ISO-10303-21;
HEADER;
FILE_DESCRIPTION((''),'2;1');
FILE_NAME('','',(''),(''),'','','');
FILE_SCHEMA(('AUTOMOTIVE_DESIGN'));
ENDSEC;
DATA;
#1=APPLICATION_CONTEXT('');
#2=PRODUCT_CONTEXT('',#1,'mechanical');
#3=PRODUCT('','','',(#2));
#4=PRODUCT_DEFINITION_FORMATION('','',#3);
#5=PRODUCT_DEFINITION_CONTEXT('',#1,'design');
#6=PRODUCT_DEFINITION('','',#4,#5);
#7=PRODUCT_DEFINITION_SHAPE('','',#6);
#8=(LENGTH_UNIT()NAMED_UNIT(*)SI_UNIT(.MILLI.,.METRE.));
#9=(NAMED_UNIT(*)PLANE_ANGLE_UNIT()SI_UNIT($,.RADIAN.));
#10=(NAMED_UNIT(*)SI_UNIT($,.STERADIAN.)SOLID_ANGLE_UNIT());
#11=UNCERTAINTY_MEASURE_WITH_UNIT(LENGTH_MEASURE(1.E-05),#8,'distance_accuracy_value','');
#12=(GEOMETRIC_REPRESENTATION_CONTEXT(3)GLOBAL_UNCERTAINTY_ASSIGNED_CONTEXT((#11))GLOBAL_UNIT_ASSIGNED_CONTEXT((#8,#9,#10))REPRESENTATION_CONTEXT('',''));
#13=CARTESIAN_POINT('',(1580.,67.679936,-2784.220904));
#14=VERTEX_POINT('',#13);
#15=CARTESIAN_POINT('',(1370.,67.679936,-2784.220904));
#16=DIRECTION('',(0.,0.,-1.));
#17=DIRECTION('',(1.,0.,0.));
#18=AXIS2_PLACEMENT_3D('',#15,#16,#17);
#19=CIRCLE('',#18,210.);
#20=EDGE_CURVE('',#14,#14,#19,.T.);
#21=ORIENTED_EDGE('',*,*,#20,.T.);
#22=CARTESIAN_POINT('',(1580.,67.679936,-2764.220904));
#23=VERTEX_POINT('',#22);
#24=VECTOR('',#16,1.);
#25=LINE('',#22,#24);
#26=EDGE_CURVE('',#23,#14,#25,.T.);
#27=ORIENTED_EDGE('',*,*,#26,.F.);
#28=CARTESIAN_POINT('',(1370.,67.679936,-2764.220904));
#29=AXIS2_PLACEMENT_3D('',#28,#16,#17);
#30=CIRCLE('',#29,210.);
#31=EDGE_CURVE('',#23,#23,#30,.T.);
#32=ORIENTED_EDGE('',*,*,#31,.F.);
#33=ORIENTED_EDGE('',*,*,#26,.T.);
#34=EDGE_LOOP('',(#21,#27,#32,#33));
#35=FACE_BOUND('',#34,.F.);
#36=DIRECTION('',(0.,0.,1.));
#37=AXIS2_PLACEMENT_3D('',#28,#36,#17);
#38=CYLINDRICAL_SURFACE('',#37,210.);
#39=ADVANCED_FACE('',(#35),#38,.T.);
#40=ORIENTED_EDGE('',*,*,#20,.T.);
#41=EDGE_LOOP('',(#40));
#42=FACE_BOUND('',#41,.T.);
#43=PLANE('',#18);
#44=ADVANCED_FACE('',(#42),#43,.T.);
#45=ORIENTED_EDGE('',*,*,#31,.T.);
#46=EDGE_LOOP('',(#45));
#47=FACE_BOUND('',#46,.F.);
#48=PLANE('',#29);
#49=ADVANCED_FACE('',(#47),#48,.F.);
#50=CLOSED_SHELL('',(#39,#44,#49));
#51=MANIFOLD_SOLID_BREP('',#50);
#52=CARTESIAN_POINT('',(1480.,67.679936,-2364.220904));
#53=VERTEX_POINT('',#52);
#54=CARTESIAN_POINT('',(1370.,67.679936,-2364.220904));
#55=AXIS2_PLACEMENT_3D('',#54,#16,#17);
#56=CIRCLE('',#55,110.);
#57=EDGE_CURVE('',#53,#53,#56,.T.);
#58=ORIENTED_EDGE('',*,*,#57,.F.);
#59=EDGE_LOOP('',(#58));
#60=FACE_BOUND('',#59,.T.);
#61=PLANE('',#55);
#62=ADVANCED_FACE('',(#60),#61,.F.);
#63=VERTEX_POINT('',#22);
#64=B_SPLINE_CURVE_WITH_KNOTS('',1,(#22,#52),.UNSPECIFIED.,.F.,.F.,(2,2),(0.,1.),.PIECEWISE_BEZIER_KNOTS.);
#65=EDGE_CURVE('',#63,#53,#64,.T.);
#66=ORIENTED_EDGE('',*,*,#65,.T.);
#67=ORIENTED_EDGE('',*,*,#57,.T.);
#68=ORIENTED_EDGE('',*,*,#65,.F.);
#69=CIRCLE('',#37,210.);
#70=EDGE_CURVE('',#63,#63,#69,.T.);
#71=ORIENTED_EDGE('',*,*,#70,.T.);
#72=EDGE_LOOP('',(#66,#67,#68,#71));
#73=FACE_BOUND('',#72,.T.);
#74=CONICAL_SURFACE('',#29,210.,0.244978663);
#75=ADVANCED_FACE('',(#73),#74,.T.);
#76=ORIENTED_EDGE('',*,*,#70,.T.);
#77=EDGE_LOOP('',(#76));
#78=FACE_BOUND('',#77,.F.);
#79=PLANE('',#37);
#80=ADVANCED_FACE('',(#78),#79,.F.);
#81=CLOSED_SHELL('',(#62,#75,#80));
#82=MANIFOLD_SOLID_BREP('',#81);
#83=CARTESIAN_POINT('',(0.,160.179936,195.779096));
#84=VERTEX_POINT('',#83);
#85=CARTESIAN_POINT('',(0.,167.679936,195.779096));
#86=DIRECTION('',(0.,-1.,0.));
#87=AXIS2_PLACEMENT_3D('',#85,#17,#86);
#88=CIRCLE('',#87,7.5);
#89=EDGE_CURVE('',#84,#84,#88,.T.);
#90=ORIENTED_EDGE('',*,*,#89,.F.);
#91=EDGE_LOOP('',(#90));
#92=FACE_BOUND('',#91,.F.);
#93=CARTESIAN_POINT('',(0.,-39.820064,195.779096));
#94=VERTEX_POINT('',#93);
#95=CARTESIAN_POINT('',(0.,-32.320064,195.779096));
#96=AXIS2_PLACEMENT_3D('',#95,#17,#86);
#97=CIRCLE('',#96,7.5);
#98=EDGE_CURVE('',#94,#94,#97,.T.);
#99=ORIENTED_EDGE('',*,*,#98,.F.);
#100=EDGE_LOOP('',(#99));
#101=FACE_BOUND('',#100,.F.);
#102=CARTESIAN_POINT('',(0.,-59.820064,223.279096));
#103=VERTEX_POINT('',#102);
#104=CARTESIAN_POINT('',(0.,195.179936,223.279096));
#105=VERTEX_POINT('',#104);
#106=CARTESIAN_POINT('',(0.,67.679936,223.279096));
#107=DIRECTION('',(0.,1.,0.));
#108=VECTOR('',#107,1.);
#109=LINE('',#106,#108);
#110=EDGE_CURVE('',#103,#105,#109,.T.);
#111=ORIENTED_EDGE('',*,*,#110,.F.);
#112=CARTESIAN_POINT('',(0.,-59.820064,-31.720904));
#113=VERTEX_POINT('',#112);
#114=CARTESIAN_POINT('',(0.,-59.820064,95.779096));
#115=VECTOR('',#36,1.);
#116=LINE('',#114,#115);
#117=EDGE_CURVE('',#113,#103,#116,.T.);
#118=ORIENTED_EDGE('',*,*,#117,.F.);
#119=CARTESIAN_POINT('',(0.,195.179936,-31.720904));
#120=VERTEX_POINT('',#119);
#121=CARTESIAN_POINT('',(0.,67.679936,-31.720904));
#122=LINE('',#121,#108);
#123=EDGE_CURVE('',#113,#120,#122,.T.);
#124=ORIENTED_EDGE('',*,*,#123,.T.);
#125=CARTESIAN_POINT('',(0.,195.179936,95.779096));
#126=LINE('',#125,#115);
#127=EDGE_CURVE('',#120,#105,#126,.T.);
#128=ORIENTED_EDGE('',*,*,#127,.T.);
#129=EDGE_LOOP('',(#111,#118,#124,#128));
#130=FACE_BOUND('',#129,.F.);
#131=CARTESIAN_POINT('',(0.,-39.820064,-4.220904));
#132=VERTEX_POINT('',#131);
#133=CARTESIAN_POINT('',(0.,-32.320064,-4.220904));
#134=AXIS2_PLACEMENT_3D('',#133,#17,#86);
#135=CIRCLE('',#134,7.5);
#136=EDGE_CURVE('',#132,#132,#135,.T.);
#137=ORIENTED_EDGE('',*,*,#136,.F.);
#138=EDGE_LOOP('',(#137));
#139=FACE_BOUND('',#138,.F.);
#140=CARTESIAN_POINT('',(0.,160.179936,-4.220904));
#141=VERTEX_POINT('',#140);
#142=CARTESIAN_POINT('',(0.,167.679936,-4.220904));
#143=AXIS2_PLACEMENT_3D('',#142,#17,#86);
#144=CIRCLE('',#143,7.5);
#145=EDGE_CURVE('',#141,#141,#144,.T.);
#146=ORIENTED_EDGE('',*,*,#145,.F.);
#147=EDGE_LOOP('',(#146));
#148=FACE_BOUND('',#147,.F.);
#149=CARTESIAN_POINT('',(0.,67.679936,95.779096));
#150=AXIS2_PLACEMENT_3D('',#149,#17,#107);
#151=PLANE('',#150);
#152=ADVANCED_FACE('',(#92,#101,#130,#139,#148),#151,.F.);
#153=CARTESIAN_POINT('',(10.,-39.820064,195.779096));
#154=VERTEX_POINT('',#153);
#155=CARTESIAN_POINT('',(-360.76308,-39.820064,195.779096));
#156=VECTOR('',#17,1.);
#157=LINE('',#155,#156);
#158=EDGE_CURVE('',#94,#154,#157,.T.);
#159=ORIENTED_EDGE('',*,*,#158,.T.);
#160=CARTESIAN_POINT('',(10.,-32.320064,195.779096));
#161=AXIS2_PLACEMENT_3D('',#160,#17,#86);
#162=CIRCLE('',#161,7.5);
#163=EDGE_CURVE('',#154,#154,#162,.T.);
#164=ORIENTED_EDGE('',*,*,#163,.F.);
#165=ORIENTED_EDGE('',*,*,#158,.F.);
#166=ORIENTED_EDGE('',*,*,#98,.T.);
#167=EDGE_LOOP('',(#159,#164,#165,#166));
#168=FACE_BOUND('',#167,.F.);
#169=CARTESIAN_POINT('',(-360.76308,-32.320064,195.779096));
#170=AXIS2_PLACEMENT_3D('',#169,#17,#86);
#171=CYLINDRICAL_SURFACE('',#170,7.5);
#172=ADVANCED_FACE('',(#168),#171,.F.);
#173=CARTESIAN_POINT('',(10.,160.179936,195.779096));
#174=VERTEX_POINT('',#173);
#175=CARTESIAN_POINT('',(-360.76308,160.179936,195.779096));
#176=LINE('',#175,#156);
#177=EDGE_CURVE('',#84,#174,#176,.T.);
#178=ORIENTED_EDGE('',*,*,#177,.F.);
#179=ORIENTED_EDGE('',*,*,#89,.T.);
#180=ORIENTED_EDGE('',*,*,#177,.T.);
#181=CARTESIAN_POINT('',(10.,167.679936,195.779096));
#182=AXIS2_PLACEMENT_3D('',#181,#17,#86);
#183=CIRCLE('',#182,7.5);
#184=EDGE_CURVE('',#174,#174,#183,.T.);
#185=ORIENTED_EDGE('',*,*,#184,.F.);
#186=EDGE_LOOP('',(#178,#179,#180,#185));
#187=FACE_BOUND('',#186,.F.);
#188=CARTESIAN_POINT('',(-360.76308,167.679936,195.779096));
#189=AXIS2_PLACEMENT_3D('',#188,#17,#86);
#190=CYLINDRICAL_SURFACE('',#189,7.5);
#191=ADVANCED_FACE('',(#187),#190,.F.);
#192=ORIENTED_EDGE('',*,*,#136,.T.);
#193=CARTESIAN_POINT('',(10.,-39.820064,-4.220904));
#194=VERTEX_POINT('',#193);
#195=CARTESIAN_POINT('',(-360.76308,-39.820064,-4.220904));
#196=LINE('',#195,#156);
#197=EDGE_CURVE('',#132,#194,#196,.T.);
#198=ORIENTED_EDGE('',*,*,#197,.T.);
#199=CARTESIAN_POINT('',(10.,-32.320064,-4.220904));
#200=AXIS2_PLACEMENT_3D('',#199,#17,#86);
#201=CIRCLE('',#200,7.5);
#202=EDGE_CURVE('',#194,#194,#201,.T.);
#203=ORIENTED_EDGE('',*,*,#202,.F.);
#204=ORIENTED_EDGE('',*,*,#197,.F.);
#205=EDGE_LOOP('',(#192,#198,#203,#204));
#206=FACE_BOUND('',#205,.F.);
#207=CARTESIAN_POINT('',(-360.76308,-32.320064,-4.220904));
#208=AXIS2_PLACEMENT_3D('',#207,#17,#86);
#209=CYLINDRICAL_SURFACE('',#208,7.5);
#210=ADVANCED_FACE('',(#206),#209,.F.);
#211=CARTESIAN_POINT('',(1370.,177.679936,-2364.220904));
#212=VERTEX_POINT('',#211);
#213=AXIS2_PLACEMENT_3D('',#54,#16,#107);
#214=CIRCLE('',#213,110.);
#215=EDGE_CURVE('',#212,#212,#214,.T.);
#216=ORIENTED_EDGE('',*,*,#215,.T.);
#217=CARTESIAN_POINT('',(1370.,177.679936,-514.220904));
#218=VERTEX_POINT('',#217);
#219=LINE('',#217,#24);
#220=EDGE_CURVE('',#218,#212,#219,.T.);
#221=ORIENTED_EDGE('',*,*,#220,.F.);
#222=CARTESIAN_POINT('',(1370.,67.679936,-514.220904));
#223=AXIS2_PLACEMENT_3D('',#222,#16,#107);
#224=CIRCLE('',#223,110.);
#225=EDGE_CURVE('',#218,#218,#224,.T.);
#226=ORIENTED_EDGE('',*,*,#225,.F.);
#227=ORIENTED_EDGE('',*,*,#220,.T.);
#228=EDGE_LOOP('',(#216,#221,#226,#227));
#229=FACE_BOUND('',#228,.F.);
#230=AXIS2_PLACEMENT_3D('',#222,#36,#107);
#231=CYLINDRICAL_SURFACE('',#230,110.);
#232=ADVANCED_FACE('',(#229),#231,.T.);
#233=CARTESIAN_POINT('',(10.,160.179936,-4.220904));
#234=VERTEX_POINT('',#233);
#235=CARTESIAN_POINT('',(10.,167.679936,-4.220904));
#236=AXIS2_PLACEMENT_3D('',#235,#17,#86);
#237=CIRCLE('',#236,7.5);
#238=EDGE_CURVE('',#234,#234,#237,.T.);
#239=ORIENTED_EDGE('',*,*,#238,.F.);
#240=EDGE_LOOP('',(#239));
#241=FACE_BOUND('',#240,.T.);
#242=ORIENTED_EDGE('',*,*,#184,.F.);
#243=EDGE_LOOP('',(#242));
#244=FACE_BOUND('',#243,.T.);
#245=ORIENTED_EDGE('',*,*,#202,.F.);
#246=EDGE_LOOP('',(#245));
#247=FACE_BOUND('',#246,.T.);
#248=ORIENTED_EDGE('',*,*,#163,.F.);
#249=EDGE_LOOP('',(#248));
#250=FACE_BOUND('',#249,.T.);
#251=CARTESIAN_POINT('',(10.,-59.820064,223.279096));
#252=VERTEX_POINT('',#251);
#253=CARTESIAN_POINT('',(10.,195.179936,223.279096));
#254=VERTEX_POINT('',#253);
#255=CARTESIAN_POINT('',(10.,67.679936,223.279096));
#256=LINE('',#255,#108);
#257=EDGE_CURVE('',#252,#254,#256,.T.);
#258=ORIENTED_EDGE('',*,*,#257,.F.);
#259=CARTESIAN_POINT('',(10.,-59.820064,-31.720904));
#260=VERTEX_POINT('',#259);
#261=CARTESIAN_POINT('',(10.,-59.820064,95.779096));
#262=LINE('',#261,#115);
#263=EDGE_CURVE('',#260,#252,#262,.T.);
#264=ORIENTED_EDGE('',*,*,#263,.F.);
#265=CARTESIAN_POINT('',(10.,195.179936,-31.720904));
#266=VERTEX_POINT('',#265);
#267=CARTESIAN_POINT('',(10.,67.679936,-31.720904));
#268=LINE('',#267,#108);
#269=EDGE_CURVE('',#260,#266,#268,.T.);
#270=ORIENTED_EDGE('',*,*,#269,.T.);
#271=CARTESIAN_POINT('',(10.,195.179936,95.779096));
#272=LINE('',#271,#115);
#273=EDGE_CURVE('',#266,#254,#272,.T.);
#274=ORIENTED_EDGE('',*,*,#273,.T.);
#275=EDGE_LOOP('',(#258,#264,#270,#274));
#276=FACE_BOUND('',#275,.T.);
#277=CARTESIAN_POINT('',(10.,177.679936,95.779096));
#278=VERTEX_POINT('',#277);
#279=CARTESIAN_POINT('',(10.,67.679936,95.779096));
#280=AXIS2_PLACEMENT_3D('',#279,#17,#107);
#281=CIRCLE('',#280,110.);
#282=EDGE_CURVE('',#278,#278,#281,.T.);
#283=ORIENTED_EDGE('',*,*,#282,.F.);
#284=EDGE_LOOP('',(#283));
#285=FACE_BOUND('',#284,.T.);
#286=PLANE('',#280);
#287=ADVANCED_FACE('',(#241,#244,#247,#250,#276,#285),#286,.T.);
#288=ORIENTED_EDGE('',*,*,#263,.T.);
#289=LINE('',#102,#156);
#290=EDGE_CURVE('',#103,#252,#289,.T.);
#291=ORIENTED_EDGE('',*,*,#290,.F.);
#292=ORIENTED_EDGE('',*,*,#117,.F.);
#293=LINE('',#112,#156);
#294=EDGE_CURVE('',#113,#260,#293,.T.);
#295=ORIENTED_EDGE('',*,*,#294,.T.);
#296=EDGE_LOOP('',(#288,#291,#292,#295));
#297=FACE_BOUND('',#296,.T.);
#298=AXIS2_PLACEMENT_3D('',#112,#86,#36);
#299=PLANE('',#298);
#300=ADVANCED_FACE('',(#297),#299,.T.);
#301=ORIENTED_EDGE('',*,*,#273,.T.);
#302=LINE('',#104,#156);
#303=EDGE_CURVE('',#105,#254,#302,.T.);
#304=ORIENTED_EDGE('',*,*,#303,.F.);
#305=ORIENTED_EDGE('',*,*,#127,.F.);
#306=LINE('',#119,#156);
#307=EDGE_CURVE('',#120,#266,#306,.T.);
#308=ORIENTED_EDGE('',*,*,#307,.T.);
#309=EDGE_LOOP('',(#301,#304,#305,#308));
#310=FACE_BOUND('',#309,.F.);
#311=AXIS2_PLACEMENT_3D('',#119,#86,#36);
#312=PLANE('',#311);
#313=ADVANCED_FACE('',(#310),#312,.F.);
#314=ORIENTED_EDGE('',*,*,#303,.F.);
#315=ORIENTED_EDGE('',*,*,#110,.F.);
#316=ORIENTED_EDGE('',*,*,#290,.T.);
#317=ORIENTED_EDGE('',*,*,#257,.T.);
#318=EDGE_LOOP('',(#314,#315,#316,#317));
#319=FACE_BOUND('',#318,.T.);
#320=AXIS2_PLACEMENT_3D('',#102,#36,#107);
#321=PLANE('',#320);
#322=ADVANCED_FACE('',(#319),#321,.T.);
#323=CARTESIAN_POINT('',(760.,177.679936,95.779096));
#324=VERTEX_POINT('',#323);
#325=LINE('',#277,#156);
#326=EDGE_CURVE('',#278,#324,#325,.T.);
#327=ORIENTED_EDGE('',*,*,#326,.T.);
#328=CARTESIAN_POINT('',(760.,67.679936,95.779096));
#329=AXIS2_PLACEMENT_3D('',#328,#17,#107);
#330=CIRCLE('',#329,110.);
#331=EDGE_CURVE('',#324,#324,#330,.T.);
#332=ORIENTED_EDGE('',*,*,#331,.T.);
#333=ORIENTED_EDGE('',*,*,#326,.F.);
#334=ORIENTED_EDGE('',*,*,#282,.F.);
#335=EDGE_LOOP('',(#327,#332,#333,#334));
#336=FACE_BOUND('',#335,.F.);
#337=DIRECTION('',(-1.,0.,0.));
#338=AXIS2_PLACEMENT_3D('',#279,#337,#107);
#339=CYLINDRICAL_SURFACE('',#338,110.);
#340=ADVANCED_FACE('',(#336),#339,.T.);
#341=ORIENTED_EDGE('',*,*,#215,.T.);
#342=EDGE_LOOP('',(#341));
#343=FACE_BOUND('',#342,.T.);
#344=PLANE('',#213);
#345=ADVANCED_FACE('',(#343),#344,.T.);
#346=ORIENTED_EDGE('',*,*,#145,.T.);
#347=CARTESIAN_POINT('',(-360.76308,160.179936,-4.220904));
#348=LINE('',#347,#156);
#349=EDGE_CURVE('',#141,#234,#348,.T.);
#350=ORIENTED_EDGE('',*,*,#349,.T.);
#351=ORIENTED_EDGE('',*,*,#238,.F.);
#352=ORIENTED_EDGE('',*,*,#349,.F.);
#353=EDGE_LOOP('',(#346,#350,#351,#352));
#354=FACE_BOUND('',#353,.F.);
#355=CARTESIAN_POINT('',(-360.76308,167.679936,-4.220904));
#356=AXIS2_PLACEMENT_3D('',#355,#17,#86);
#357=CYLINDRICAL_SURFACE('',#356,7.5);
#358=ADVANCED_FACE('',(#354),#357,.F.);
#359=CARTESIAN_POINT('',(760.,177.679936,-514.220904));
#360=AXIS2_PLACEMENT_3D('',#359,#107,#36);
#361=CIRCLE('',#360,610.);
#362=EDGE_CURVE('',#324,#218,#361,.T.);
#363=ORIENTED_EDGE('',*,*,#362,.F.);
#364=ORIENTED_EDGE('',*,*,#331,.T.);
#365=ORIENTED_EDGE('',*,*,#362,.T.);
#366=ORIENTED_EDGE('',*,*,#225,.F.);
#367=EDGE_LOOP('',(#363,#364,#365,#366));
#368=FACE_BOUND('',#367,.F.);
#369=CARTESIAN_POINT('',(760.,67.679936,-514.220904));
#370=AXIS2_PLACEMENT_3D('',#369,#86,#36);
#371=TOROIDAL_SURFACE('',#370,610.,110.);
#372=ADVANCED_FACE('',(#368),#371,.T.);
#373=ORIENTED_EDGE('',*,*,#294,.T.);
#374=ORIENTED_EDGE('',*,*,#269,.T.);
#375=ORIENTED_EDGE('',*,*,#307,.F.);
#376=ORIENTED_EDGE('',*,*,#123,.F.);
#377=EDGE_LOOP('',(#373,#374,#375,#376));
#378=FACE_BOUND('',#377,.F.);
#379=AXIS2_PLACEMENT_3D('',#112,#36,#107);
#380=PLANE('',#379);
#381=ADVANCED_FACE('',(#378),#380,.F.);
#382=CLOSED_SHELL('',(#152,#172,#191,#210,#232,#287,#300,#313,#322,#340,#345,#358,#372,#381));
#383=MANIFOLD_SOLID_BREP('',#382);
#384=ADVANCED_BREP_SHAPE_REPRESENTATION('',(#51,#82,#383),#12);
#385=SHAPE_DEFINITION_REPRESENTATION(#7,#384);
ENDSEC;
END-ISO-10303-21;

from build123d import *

# Parameters (mm, degrees)
F0_W       = 255
F0_H       = 255
F1_DEPTH   = 10
F2_D       = 15
F3_R       = 110
F4_DEPTH   = 750
F5_R       = 110
F6_ANGLE   = 90
F7_DEPTH   = 1850
F9_R       = 210
F10_DEPTH  = 20
F10_FACE_R = 210
F7_FACE_R  = 110


with BuildPart() as f1:
    # F0 (on Right) → F1 (new body)
    with BuildSketch(Plane.YZ):
        with Locations((67.6799364388, 95.7790961489)):
            Rectangle(F0_W, F0_H)
    extrude(amount=F1_DEPTH)

    # F2 (through all)
    with Locations(Plane(origin=(0, 0, 0), x_dir=(0, 1, 0), z_dir=(-1, 0, 0))):
        with Locations((-32.3200635612, -195.7790961489), (167.6799364388, -195.7790961489), (167.6799364388, 4.2209038511), (-32.3200635612, 4.2209038511)):
            Hole(F2_D / 2)

    # F3 (on face) → F4 (join)
    with BuildSketch(Plane.YZ.offset(10)):
        with Locations((67.6799364388, 95.7790961489)):
            Circle(F3_R)
    extrude(amount=F4_DEPTH)

    # F5 (on face) → F6 (revolve)
    with BuildSketch(Plane.YZ.offset(760)):
        with Locations((67.6799364388, 95.7790961489)):
            Circle(F5_R)
    revolve(axis=Axis((760, 94.2381992936, -514.2209038511), (0, 1, 0)), revolution_arc=F6_ANGLE)

    # F7 (add): a face of the model
    f7_faces = [f1.faces().sort_by_distance(p)[0] for p in [
        (1370, 67.6799364388, -514.2209038511),
    ]]
    extrude(f7_faces, amount=F7_DEPTH)


with BuildPart() as f10:
    # F9 (on face) → F10 (new body)
    with BuildSketch(Plane(origin=(0, 0, -2764.2209038511), x_dir=(1, 0, 0), z_dir=(0, 0, -1))):
        with Locations((1370, -67.6799364388)):
            Circle(F9_R)
    extrude(amount=F10_DEPTH)


with BuildPart() as f11:
    # F10_face (on face) → F11 section 0
    with BuildSketch(Plane(origin=(1370, 67.6799364388, -2764.2209038511), x_dir=(1, 0, 0), z_dir=(0, 0, 1))):
        Circle(F10_FACE_R)
    # F7_face (on face) → F11 section 1
    with BuildSketch(Plane(origin=(1370, 67.6799364388, -2364.2209038511), x_dir=(1, 0, 0), z_dir=(0, 0, -1))):
        Circle(F7_FACE_R)
    loft()


solid = Compound([f1.part, f10.part, f11.part])
